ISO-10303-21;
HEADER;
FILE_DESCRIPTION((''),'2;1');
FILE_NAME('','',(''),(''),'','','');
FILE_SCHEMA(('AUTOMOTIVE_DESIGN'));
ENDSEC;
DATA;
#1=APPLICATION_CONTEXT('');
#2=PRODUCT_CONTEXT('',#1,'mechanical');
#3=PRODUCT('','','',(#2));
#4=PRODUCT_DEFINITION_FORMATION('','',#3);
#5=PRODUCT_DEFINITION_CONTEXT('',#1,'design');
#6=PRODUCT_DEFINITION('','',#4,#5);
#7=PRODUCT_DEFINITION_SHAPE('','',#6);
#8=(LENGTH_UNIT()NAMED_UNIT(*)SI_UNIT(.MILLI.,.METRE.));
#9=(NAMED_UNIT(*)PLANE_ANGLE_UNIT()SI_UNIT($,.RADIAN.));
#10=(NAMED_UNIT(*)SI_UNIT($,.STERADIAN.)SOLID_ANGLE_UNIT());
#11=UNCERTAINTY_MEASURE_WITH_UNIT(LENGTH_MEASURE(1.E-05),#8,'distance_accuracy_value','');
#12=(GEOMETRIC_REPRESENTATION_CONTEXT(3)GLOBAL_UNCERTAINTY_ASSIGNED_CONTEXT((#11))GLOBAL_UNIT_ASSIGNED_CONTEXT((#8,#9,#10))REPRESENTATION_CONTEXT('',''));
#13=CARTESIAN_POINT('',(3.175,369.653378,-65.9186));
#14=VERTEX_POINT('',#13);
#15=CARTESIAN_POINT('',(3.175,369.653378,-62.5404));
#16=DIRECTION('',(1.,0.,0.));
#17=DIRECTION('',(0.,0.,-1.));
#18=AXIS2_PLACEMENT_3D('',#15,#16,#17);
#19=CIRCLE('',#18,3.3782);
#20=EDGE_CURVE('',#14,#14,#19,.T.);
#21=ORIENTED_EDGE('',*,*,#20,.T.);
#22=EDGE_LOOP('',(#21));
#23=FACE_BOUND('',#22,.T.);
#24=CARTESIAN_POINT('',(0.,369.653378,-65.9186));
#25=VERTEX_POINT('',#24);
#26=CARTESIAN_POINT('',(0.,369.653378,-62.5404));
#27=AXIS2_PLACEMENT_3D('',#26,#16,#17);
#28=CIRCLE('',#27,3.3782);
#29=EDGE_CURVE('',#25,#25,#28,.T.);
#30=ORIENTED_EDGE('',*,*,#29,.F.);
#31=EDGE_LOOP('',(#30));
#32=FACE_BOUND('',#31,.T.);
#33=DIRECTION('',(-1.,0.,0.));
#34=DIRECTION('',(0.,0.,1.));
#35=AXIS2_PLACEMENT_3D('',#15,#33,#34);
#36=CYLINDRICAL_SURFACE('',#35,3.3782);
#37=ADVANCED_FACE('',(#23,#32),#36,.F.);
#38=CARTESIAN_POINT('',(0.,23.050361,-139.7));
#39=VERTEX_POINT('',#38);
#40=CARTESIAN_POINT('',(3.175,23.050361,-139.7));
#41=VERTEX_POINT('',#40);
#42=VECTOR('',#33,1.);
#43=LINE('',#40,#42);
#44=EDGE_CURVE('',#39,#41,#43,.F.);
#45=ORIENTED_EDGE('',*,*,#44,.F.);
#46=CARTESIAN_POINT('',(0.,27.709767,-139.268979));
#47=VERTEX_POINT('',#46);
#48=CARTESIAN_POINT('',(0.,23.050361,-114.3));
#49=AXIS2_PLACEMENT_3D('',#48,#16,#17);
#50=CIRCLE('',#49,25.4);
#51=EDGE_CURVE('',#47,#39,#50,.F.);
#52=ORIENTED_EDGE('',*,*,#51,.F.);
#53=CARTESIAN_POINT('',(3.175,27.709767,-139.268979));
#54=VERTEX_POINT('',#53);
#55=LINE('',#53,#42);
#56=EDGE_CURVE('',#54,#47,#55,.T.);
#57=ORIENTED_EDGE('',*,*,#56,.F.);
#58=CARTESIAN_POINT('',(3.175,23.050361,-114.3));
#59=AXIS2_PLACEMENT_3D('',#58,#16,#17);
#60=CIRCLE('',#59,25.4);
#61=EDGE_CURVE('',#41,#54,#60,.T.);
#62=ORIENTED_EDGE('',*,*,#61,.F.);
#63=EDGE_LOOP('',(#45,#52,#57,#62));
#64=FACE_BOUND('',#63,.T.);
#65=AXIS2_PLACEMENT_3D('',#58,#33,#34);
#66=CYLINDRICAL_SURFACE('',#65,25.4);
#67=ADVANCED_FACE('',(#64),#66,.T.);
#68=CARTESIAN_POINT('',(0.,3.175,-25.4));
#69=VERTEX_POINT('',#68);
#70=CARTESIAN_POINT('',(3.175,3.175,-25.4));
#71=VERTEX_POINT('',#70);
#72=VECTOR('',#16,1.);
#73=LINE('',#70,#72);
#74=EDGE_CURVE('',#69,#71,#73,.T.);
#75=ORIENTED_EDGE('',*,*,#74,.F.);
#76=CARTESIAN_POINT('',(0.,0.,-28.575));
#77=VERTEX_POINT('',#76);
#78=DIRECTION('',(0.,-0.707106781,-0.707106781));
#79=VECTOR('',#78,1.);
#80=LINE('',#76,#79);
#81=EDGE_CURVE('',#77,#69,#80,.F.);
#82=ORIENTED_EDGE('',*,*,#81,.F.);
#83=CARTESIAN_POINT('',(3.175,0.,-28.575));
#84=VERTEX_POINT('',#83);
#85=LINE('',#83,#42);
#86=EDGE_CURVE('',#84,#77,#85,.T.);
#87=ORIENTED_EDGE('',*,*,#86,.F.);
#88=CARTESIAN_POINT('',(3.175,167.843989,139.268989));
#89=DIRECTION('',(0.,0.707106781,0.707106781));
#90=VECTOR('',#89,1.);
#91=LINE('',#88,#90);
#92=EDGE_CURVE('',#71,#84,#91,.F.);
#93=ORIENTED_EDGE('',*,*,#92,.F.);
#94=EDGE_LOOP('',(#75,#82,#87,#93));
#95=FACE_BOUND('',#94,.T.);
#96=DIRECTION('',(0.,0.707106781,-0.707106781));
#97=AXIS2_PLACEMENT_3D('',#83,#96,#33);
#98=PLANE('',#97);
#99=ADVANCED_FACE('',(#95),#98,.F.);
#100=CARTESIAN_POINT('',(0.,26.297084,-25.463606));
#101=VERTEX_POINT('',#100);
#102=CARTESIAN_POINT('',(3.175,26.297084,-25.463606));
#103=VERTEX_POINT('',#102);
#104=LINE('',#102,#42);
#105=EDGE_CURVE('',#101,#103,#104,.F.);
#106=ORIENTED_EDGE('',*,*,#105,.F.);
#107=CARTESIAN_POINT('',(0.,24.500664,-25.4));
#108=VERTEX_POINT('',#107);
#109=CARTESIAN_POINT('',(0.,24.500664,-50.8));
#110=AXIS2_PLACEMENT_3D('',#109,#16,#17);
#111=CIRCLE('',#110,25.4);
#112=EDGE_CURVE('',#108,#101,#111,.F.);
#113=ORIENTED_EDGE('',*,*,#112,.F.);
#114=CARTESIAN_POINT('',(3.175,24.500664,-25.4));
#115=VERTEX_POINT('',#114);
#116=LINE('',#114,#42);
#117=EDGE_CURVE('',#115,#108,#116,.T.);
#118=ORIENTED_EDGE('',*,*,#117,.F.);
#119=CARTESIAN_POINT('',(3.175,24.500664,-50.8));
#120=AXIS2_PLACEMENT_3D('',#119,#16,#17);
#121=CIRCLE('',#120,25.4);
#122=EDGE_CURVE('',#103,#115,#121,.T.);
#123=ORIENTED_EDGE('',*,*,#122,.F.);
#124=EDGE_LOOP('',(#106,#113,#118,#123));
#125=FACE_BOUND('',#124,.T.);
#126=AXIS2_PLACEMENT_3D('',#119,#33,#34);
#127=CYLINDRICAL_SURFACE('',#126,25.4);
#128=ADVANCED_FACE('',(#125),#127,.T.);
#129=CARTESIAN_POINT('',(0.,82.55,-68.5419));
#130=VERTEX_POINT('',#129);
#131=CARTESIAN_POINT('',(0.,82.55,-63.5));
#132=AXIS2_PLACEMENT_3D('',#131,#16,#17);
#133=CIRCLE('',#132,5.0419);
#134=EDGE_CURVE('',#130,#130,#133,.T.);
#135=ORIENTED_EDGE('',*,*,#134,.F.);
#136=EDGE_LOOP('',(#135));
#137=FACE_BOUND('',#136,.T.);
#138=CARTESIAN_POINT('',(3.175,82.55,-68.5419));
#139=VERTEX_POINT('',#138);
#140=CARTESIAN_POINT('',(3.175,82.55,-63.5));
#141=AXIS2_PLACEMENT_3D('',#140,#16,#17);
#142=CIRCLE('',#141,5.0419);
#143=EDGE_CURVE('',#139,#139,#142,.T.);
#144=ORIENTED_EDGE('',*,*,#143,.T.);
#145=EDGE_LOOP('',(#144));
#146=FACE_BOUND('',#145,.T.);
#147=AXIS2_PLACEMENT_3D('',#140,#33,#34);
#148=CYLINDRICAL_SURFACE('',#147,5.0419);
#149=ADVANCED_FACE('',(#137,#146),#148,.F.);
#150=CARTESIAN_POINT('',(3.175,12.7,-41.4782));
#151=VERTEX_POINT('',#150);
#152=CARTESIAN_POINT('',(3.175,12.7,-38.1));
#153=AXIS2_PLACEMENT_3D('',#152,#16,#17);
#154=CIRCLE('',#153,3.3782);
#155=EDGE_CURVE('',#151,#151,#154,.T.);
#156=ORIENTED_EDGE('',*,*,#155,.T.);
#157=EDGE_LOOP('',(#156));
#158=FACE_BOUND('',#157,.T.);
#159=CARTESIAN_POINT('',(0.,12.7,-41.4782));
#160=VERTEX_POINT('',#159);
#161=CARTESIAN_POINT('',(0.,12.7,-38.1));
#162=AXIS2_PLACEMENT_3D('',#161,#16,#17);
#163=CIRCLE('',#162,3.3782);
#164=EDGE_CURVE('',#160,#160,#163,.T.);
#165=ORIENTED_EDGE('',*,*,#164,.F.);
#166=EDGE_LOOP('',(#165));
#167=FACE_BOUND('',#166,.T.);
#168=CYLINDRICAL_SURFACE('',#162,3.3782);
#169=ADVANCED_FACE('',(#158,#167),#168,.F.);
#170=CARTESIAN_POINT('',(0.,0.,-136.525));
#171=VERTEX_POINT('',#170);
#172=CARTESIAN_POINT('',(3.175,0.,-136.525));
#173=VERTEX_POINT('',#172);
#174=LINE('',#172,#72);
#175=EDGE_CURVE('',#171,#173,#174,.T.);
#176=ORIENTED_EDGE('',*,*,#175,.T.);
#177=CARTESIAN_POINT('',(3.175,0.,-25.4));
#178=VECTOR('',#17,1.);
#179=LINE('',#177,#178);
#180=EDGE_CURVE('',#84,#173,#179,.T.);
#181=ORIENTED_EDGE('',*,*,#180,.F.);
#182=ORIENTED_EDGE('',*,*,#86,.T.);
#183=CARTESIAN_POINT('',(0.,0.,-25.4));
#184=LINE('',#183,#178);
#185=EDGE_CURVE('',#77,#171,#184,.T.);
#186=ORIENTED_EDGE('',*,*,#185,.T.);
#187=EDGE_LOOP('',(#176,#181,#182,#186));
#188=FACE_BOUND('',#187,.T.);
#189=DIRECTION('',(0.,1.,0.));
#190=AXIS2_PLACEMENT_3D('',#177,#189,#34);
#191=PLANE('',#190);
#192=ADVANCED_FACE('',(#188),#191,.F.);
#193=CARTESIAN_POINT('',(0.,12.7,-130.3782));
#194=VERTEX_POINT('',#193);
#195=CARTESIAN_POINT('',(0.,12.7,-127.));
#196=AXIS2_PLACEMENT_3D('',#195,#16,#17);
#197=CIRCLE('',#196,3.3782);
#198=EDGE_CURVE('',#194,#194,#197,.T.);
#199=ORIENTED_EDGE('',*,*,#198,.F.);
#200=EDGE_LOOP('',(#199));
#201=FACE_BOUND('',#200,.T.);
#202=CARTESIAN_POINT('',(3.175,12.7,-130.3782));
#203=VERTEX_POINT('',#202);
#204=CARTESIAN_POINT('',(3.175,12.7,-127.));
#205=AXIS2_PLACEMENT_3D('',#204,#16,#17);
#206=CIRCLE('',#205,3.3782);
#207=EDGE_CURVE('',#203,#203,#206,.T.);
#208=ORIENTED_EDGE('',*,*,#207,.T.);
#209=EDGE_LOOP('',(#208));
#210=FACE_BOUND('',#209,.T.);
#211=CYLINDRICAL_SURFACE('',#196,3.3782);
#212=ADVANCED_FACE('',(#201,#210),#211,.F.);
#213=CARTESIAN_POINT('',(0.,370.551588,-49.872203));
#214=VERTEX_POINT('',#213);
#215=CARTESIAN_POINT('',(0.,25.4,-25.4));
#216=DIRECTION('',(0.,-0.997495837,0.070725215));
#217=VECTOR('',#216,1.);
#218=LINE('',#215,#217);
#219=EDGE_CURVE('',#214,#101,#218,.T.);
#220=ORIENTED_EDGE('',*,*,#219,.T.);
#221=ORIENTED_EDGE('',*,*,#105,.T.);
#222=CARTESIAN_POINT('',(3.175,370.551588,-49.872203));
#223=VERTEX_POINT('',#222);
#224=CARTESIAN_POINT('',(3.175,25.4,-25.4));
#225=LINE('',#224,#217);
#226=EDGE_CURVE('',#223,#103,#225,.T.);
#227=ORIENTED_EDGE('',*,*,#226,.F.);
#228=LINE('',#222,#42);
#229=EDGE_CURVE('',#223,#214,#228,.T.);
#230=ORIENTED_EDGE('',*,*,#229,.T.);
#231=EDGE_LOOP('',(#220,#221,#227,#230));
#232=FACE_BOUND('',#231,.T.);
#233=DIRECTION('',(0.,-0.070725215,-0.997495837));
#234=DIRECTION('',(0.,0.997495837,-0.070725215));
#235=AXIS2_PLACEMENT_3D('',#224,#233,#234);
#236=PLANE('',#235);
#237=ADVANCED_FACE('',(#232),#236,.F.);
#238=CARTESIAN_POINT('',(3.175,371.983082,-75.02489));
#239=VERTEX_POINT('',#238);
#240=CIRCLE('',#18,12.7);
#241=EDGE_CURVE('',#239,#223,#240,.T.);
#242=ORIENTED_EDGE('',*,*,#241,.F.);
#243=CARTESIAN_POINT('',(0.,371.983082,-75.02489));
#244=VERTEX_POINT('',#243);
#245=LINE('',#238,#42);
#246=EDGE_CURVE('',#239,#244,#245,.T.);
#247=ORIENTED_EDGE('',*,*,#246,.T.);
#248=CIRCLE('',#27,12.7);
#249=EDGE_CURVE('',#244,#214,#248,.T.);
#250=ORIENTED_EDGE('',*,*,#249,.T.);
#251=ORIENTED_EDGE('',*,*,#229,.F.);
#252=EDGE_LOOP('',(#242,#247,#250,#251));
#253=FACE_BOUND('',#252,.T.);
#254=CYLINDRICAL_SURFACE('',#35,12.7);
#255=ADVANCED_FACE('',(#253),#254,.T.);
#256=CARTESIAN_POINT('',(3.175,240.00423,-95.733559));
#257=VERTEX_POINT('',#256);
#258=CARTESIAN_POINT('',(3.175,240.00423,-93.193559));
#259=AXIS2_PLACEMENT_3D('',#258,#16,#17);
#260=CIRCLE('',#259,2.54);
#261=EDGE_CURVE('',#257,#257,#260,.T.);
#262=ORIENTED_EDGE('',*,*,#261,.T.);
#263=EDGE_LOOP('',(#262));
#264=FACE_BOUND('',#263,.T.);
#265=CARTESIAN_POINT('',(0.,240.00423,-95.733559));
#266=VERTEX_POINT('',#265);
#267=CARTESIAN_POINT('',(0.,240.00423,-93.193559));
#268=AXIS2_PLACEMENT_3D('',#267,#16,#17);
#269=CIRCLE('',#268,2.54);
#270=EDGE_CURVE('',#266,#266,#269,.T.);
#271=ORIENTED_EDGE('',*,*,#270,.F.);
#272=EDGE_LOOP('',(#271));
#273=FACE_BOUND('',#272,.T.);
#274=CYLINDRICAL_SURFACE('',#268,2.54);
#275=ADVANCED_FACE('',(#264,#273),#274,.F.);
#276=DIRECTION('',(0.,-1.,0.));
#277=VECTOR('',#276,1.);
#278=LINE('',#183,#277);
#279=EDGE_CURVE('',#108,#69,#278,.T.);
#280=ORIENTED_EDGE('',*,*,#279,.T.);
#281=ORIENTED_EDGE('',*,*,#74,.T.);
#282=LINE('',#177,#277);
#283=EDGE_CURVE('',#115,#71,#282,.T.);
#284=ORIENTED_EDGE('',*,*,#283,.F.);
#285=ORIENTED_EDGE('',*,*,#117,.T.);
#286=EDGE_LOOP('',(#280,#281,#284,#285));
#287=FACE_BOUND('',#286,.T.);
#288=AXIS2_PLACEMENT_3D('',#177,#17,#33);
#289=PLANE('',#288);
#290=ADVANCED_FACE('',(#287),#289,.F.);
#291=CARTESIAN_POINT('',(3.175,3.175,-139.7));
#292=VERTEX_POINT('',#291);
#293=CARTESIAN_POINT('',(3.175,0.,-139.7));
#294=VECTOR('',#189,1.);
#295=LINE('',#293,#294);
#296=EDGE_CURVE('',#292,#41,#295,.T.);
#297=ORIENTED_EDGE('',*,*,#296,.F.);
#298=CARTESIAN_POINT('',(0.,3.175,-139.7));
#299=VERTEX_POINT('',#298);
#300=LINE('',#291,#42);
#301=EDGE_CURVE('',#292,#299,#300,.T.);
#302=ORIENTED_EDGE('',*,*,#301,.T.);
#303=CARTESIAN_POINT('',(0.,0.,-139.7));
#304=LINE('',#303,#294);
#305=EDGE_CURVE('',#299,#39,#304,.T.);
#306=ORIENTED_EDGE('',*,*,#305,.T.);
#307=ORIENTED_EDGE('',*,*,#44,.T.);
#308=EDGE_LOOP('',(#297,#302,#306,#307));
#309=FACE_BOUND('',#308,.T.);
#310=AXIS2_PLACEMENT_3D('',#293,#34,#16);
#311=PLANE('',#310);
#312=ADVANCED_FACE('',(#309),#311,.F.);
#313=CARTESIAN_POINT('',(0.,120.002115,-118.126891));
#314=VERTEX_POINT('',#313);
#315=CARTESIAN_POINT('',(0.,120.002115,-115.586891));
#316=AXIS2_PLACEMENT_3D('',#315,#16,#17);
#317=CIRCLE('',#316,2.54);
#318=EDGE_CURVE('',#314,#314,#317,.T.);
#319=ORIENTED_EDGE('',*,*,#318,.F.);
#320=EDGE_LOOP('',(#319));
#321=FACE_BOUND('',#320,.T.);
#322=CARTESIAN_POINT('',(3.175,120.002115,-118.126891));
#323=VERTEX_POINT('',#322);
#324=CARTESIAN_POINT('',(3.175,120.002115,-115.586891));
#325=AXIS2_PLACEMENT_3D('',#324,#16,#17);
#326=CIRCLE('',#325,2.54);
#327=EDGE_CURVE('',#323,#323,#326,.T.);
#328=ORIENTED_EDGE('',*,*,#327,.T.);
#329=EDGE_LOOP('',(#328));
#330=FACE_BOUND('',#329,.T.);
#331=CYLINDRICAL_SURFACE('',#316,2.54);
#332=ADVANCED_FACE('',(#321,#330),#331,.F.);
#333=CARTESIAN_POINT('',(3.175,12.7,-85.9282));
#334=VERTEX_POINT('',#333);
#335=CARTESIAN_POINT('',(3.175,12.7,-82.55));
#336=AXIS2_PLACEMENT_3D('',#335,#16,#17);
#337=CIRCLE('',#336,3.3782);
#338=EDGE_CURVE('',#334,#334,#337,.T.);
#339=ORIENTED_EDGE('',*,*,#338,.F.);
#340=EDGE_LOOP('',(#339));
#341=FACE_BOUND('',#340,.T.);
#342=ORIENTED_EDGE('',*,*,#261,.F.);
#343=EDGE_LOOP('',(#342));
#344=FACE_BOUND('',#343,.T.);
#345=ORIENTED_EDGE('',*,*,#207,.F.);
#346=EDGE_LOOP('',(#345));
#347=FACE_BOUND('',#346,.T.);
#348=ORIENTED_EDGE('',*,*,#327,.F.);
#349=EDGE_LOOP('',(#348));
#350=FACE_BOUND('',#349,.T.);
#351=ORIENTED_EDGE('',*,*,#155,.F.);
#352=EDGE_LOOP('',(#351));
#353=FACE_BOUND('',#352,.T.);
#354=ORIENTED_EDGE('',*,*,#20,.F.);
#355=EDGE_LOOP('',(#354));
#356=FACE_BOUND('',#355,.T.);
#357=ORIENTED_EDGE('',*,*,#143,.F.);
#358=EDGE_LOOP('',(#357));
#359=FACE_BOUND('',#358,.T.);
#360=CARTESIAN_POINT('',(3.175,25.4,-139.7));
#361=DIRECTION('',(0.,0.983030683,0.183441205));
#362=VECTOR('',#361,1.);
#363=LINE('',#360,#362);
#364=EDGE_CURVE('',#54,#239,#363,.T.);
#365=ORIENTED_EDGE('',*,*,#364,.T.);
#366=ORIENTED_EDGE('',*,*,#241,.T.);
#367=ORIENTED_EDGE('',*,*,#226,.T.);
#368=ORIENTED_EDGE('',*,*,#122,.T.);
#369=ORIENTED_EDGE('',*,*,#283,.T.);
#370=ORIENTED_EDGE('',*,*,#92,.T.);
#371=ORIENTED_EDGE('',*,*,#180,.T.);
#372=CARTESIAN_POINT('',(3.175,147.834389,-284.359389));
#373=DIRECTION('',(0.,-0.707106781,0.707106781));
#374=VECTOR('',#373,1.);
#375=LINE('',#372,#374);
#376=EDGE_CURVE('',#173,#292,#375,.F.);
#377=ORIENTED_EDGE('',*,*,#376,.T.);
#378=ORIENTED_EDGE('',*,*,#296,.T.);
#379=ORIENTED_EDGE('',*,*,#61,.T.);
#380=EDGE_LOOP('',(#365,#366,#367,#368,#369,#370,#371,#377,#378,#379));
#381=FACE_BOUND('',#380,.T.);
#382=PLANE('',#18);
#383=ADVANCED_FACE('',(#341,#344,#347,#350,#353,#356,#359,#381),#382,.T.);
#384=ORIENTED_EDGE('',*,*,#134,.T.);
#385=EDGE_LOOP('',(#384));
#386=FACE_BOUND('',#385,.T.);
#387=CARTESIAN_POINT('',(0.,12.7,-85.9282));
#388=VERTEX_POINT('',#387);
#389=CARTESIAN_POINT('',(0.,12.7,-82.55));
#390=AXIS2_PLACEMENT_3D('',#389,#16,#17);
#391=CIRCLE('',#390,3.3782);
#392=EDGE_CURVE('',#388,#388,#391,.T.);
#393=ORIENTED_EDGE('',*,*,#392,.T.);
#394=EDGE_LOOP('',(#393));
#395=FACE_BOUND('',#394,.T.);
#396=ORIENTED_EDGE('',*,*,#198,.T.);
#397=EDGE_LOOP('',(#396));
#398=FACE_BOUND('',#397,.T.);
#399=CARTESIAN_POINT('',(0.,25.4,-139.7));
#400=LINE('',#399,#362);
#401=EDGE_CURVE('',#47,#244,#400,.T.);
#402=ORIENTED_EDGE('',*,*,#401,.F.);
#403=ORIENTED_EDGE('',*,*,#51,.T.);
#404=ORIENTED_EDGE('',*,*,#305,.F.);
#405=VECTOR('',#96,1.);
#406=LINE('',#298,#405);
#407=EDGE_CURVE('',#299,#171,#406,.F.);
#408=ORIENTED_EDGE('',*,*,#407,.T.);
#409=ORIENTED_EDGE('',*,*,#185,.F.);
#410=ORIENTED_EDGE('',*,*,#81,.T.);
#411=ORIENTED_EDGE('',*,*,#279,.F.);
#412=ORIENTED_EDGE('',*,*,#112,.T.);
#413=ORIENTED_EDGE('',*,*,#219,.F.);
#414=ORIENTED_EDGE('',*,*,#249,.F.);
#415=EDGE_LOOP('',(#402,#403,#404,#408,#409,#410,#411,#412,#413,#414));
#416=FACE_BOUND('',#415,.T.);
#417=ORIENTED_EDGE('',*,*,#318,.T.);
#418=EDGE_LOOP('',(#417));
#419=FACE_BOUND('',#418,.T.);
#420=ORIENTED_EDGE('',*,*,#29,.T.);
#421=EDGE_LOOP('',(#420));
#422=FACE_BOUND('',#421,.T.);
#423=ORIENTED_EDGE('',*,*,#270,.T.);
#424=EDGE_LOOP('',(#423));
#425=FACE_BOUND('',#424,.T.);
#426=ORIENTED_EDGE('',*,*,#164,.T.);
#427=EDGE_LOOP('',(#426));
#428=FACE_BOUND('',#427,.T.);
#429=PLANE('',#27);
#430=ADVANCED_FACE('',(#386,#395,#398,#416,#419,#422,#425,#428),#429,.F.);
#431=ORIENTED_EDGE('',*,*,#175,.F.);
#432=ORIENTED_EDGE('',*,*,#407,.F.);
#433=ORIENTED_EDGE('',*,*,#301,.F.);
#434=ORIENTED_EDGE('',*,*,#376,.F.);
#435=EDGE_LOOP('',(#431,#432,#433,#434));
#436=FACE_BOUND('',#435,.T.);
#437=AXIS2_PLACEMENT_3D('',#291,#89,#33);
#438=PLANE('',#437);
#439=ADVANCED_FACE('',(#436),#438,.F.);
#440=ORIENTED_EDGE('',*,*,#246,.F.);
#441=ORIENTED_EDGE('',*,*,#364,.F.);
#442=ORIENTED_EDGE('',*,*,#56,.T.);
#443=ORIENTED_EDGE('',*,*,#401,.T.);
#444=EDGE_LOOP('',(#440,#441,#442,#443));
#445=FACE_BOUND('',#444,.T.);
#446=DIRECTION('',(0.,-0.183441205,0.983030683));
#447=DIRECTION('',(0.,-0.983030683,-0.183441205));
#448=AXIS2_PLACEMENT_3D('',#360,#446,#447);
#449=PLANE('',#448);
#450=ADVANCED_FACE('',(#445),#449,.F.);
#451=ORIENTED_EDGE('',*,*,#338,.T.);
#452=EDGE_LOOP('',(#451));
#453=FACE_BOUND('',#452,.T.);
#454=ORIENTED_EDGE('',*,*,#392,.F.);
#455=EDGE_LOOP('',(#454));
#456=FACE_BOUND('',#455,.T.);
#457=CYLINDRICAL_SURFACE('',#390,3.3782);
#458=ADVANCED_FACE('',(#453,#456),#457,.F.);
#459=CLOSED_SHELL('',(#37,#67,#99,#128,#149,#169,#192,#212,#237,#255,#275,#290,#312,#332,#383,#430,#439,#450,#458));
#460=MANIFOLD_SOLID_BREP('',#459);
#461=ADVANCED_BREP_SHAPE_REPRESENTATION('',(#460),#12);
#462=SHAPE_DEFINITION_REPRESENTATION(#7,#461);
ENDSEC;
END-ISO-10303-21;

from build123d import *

# Parameters (mm, degrees)
SKETCH2_R           = 5.0419
SKETCH2_R_2         = 3.3782
BOSS_EXTRUDE2_DEPTH = 3.175
SKETCH3_R           = 3.3782
SKETCH3_R_2         = 2.54
CUT_EXTRUDE1_DEPTH  = 408.087553815
CHAMFER1_SIZE       = 3.175
FILLET1_R           = 25.4


with BuildPart() as part:
    # Sketch2 → Boss-Extrude2 (new body)
    with BuildSketch(Plane(origin=(0, 0, 0), x_dir=(0, 0, -1), z_dir=(1, 0, 0))):
        with BuildLine():
            Line((25.4, 0), (25.4, 25.4))
            Line((25.4, 25.4), (49.872202827, 370.551588468))
            ThreePointArc((49.872202827, 370.551588468), (61.818783569, 382.33286047), (75.02488963, 371.98308153))
            Line((75.02488963, 371.98308153), (139.7, 25.4))
            Line((139.7, 25.4), (139.7, 0))
            Line((139.7, 0), (25.4, 0))
        make_face()
        with Locations((63.5, 82.55)):
            Circle(SKETCH2_R, mode=Mode.SUBTRACT)
        with Locations((62.540399951, 369.653378233)):
            Circle(SKETCH2_R_2, mode=Mode.SUBTRACT)
    extrude(amount=BOSS_EXTRUDE2_DEPTH)

    # Sketch3 → Cut-Extrude1 (cut, through all)
    with BuildSketch(Plane(origin=(3.175, 0, 0), x_dir=(0, 0, -1), z_dir=(1, 0, 0))):
        with Locations((38.1, 12.7)):
            Circle(SKETCH3_R)
        with Locations((82.55, 12.7)):
            Circle(SKETCH3_R)
        with Locations((127, 12.7)):
            Circle(SKETCH3_R)
        with Locations((93.193559072, 240.004229778)):
            Circle(SKETCH3_R_2)
        with Locations((115.586891115, 120.002114889)):
            Circle(SKETCH3_R_2)
    extrude(amount=-CUT_EXTRUDE1_DEPTH, mode=Mode.SUBTRACT)

    # Chamfer1
    chamfer1_edges = [part.edges().sort_by_distance(p)[0] for p in [
        (1.5875, 0, -25.4),
        (1.5875, 0, -139.7),
    ]]
    chamfer(chamfer1_edges, length=CHAMFER1_SIZE)

    # Fillet1
    # the kernel refuses this fillet: 25.4 mm, written as the material it takes off along each edge
    with BuildSketch(Plane(origin=(-2.248340694, 25.4, -25.4), x_dir=(0, -1, 0), z_dir=(1, 0, 0))) as fillet1_piece_1:
        with BuildLine():
            CenterArc((FILLET1_R * 0.0354069400697, FILLET1_R), FILLET1_R, 265.944357758, 4.055642242)
            Line((-FILLET1_R * 0.0353182753041, FILLET1_R * 0.00250416346216), (0, 0))
            Line((0, 0), (FILLET1_R * 0.0354069400697, 0))
        make_face()
    extrude(amount=7.671681389, mode=Mode.SUBTRACT)
    with BuildSketch(Plane(origin=(-5.874097958, 25.4, -139.7), x_dir=(0, 0.9830306833875174, 0.1834412045279636), z_dir=(1, 0, 0))) as fillet1_piece_2:
        with BuildLine():
            CenterArc((FILLET1_R * 0.0925054796503, FILLET1_R), FILLET1_R, 259.429735221, 10.570264779)
            Line((-FILLET1_R * 0.0909357248777, FILLET1_R * 0.0169693166125), (0, 0))
            Line((0, 0), (FILLET1_R * 0.0925054796503, 0))
        make_face()
    extrude(amount=14.923195916, mode=Mode.SUBTRACT)


solid = part.part
